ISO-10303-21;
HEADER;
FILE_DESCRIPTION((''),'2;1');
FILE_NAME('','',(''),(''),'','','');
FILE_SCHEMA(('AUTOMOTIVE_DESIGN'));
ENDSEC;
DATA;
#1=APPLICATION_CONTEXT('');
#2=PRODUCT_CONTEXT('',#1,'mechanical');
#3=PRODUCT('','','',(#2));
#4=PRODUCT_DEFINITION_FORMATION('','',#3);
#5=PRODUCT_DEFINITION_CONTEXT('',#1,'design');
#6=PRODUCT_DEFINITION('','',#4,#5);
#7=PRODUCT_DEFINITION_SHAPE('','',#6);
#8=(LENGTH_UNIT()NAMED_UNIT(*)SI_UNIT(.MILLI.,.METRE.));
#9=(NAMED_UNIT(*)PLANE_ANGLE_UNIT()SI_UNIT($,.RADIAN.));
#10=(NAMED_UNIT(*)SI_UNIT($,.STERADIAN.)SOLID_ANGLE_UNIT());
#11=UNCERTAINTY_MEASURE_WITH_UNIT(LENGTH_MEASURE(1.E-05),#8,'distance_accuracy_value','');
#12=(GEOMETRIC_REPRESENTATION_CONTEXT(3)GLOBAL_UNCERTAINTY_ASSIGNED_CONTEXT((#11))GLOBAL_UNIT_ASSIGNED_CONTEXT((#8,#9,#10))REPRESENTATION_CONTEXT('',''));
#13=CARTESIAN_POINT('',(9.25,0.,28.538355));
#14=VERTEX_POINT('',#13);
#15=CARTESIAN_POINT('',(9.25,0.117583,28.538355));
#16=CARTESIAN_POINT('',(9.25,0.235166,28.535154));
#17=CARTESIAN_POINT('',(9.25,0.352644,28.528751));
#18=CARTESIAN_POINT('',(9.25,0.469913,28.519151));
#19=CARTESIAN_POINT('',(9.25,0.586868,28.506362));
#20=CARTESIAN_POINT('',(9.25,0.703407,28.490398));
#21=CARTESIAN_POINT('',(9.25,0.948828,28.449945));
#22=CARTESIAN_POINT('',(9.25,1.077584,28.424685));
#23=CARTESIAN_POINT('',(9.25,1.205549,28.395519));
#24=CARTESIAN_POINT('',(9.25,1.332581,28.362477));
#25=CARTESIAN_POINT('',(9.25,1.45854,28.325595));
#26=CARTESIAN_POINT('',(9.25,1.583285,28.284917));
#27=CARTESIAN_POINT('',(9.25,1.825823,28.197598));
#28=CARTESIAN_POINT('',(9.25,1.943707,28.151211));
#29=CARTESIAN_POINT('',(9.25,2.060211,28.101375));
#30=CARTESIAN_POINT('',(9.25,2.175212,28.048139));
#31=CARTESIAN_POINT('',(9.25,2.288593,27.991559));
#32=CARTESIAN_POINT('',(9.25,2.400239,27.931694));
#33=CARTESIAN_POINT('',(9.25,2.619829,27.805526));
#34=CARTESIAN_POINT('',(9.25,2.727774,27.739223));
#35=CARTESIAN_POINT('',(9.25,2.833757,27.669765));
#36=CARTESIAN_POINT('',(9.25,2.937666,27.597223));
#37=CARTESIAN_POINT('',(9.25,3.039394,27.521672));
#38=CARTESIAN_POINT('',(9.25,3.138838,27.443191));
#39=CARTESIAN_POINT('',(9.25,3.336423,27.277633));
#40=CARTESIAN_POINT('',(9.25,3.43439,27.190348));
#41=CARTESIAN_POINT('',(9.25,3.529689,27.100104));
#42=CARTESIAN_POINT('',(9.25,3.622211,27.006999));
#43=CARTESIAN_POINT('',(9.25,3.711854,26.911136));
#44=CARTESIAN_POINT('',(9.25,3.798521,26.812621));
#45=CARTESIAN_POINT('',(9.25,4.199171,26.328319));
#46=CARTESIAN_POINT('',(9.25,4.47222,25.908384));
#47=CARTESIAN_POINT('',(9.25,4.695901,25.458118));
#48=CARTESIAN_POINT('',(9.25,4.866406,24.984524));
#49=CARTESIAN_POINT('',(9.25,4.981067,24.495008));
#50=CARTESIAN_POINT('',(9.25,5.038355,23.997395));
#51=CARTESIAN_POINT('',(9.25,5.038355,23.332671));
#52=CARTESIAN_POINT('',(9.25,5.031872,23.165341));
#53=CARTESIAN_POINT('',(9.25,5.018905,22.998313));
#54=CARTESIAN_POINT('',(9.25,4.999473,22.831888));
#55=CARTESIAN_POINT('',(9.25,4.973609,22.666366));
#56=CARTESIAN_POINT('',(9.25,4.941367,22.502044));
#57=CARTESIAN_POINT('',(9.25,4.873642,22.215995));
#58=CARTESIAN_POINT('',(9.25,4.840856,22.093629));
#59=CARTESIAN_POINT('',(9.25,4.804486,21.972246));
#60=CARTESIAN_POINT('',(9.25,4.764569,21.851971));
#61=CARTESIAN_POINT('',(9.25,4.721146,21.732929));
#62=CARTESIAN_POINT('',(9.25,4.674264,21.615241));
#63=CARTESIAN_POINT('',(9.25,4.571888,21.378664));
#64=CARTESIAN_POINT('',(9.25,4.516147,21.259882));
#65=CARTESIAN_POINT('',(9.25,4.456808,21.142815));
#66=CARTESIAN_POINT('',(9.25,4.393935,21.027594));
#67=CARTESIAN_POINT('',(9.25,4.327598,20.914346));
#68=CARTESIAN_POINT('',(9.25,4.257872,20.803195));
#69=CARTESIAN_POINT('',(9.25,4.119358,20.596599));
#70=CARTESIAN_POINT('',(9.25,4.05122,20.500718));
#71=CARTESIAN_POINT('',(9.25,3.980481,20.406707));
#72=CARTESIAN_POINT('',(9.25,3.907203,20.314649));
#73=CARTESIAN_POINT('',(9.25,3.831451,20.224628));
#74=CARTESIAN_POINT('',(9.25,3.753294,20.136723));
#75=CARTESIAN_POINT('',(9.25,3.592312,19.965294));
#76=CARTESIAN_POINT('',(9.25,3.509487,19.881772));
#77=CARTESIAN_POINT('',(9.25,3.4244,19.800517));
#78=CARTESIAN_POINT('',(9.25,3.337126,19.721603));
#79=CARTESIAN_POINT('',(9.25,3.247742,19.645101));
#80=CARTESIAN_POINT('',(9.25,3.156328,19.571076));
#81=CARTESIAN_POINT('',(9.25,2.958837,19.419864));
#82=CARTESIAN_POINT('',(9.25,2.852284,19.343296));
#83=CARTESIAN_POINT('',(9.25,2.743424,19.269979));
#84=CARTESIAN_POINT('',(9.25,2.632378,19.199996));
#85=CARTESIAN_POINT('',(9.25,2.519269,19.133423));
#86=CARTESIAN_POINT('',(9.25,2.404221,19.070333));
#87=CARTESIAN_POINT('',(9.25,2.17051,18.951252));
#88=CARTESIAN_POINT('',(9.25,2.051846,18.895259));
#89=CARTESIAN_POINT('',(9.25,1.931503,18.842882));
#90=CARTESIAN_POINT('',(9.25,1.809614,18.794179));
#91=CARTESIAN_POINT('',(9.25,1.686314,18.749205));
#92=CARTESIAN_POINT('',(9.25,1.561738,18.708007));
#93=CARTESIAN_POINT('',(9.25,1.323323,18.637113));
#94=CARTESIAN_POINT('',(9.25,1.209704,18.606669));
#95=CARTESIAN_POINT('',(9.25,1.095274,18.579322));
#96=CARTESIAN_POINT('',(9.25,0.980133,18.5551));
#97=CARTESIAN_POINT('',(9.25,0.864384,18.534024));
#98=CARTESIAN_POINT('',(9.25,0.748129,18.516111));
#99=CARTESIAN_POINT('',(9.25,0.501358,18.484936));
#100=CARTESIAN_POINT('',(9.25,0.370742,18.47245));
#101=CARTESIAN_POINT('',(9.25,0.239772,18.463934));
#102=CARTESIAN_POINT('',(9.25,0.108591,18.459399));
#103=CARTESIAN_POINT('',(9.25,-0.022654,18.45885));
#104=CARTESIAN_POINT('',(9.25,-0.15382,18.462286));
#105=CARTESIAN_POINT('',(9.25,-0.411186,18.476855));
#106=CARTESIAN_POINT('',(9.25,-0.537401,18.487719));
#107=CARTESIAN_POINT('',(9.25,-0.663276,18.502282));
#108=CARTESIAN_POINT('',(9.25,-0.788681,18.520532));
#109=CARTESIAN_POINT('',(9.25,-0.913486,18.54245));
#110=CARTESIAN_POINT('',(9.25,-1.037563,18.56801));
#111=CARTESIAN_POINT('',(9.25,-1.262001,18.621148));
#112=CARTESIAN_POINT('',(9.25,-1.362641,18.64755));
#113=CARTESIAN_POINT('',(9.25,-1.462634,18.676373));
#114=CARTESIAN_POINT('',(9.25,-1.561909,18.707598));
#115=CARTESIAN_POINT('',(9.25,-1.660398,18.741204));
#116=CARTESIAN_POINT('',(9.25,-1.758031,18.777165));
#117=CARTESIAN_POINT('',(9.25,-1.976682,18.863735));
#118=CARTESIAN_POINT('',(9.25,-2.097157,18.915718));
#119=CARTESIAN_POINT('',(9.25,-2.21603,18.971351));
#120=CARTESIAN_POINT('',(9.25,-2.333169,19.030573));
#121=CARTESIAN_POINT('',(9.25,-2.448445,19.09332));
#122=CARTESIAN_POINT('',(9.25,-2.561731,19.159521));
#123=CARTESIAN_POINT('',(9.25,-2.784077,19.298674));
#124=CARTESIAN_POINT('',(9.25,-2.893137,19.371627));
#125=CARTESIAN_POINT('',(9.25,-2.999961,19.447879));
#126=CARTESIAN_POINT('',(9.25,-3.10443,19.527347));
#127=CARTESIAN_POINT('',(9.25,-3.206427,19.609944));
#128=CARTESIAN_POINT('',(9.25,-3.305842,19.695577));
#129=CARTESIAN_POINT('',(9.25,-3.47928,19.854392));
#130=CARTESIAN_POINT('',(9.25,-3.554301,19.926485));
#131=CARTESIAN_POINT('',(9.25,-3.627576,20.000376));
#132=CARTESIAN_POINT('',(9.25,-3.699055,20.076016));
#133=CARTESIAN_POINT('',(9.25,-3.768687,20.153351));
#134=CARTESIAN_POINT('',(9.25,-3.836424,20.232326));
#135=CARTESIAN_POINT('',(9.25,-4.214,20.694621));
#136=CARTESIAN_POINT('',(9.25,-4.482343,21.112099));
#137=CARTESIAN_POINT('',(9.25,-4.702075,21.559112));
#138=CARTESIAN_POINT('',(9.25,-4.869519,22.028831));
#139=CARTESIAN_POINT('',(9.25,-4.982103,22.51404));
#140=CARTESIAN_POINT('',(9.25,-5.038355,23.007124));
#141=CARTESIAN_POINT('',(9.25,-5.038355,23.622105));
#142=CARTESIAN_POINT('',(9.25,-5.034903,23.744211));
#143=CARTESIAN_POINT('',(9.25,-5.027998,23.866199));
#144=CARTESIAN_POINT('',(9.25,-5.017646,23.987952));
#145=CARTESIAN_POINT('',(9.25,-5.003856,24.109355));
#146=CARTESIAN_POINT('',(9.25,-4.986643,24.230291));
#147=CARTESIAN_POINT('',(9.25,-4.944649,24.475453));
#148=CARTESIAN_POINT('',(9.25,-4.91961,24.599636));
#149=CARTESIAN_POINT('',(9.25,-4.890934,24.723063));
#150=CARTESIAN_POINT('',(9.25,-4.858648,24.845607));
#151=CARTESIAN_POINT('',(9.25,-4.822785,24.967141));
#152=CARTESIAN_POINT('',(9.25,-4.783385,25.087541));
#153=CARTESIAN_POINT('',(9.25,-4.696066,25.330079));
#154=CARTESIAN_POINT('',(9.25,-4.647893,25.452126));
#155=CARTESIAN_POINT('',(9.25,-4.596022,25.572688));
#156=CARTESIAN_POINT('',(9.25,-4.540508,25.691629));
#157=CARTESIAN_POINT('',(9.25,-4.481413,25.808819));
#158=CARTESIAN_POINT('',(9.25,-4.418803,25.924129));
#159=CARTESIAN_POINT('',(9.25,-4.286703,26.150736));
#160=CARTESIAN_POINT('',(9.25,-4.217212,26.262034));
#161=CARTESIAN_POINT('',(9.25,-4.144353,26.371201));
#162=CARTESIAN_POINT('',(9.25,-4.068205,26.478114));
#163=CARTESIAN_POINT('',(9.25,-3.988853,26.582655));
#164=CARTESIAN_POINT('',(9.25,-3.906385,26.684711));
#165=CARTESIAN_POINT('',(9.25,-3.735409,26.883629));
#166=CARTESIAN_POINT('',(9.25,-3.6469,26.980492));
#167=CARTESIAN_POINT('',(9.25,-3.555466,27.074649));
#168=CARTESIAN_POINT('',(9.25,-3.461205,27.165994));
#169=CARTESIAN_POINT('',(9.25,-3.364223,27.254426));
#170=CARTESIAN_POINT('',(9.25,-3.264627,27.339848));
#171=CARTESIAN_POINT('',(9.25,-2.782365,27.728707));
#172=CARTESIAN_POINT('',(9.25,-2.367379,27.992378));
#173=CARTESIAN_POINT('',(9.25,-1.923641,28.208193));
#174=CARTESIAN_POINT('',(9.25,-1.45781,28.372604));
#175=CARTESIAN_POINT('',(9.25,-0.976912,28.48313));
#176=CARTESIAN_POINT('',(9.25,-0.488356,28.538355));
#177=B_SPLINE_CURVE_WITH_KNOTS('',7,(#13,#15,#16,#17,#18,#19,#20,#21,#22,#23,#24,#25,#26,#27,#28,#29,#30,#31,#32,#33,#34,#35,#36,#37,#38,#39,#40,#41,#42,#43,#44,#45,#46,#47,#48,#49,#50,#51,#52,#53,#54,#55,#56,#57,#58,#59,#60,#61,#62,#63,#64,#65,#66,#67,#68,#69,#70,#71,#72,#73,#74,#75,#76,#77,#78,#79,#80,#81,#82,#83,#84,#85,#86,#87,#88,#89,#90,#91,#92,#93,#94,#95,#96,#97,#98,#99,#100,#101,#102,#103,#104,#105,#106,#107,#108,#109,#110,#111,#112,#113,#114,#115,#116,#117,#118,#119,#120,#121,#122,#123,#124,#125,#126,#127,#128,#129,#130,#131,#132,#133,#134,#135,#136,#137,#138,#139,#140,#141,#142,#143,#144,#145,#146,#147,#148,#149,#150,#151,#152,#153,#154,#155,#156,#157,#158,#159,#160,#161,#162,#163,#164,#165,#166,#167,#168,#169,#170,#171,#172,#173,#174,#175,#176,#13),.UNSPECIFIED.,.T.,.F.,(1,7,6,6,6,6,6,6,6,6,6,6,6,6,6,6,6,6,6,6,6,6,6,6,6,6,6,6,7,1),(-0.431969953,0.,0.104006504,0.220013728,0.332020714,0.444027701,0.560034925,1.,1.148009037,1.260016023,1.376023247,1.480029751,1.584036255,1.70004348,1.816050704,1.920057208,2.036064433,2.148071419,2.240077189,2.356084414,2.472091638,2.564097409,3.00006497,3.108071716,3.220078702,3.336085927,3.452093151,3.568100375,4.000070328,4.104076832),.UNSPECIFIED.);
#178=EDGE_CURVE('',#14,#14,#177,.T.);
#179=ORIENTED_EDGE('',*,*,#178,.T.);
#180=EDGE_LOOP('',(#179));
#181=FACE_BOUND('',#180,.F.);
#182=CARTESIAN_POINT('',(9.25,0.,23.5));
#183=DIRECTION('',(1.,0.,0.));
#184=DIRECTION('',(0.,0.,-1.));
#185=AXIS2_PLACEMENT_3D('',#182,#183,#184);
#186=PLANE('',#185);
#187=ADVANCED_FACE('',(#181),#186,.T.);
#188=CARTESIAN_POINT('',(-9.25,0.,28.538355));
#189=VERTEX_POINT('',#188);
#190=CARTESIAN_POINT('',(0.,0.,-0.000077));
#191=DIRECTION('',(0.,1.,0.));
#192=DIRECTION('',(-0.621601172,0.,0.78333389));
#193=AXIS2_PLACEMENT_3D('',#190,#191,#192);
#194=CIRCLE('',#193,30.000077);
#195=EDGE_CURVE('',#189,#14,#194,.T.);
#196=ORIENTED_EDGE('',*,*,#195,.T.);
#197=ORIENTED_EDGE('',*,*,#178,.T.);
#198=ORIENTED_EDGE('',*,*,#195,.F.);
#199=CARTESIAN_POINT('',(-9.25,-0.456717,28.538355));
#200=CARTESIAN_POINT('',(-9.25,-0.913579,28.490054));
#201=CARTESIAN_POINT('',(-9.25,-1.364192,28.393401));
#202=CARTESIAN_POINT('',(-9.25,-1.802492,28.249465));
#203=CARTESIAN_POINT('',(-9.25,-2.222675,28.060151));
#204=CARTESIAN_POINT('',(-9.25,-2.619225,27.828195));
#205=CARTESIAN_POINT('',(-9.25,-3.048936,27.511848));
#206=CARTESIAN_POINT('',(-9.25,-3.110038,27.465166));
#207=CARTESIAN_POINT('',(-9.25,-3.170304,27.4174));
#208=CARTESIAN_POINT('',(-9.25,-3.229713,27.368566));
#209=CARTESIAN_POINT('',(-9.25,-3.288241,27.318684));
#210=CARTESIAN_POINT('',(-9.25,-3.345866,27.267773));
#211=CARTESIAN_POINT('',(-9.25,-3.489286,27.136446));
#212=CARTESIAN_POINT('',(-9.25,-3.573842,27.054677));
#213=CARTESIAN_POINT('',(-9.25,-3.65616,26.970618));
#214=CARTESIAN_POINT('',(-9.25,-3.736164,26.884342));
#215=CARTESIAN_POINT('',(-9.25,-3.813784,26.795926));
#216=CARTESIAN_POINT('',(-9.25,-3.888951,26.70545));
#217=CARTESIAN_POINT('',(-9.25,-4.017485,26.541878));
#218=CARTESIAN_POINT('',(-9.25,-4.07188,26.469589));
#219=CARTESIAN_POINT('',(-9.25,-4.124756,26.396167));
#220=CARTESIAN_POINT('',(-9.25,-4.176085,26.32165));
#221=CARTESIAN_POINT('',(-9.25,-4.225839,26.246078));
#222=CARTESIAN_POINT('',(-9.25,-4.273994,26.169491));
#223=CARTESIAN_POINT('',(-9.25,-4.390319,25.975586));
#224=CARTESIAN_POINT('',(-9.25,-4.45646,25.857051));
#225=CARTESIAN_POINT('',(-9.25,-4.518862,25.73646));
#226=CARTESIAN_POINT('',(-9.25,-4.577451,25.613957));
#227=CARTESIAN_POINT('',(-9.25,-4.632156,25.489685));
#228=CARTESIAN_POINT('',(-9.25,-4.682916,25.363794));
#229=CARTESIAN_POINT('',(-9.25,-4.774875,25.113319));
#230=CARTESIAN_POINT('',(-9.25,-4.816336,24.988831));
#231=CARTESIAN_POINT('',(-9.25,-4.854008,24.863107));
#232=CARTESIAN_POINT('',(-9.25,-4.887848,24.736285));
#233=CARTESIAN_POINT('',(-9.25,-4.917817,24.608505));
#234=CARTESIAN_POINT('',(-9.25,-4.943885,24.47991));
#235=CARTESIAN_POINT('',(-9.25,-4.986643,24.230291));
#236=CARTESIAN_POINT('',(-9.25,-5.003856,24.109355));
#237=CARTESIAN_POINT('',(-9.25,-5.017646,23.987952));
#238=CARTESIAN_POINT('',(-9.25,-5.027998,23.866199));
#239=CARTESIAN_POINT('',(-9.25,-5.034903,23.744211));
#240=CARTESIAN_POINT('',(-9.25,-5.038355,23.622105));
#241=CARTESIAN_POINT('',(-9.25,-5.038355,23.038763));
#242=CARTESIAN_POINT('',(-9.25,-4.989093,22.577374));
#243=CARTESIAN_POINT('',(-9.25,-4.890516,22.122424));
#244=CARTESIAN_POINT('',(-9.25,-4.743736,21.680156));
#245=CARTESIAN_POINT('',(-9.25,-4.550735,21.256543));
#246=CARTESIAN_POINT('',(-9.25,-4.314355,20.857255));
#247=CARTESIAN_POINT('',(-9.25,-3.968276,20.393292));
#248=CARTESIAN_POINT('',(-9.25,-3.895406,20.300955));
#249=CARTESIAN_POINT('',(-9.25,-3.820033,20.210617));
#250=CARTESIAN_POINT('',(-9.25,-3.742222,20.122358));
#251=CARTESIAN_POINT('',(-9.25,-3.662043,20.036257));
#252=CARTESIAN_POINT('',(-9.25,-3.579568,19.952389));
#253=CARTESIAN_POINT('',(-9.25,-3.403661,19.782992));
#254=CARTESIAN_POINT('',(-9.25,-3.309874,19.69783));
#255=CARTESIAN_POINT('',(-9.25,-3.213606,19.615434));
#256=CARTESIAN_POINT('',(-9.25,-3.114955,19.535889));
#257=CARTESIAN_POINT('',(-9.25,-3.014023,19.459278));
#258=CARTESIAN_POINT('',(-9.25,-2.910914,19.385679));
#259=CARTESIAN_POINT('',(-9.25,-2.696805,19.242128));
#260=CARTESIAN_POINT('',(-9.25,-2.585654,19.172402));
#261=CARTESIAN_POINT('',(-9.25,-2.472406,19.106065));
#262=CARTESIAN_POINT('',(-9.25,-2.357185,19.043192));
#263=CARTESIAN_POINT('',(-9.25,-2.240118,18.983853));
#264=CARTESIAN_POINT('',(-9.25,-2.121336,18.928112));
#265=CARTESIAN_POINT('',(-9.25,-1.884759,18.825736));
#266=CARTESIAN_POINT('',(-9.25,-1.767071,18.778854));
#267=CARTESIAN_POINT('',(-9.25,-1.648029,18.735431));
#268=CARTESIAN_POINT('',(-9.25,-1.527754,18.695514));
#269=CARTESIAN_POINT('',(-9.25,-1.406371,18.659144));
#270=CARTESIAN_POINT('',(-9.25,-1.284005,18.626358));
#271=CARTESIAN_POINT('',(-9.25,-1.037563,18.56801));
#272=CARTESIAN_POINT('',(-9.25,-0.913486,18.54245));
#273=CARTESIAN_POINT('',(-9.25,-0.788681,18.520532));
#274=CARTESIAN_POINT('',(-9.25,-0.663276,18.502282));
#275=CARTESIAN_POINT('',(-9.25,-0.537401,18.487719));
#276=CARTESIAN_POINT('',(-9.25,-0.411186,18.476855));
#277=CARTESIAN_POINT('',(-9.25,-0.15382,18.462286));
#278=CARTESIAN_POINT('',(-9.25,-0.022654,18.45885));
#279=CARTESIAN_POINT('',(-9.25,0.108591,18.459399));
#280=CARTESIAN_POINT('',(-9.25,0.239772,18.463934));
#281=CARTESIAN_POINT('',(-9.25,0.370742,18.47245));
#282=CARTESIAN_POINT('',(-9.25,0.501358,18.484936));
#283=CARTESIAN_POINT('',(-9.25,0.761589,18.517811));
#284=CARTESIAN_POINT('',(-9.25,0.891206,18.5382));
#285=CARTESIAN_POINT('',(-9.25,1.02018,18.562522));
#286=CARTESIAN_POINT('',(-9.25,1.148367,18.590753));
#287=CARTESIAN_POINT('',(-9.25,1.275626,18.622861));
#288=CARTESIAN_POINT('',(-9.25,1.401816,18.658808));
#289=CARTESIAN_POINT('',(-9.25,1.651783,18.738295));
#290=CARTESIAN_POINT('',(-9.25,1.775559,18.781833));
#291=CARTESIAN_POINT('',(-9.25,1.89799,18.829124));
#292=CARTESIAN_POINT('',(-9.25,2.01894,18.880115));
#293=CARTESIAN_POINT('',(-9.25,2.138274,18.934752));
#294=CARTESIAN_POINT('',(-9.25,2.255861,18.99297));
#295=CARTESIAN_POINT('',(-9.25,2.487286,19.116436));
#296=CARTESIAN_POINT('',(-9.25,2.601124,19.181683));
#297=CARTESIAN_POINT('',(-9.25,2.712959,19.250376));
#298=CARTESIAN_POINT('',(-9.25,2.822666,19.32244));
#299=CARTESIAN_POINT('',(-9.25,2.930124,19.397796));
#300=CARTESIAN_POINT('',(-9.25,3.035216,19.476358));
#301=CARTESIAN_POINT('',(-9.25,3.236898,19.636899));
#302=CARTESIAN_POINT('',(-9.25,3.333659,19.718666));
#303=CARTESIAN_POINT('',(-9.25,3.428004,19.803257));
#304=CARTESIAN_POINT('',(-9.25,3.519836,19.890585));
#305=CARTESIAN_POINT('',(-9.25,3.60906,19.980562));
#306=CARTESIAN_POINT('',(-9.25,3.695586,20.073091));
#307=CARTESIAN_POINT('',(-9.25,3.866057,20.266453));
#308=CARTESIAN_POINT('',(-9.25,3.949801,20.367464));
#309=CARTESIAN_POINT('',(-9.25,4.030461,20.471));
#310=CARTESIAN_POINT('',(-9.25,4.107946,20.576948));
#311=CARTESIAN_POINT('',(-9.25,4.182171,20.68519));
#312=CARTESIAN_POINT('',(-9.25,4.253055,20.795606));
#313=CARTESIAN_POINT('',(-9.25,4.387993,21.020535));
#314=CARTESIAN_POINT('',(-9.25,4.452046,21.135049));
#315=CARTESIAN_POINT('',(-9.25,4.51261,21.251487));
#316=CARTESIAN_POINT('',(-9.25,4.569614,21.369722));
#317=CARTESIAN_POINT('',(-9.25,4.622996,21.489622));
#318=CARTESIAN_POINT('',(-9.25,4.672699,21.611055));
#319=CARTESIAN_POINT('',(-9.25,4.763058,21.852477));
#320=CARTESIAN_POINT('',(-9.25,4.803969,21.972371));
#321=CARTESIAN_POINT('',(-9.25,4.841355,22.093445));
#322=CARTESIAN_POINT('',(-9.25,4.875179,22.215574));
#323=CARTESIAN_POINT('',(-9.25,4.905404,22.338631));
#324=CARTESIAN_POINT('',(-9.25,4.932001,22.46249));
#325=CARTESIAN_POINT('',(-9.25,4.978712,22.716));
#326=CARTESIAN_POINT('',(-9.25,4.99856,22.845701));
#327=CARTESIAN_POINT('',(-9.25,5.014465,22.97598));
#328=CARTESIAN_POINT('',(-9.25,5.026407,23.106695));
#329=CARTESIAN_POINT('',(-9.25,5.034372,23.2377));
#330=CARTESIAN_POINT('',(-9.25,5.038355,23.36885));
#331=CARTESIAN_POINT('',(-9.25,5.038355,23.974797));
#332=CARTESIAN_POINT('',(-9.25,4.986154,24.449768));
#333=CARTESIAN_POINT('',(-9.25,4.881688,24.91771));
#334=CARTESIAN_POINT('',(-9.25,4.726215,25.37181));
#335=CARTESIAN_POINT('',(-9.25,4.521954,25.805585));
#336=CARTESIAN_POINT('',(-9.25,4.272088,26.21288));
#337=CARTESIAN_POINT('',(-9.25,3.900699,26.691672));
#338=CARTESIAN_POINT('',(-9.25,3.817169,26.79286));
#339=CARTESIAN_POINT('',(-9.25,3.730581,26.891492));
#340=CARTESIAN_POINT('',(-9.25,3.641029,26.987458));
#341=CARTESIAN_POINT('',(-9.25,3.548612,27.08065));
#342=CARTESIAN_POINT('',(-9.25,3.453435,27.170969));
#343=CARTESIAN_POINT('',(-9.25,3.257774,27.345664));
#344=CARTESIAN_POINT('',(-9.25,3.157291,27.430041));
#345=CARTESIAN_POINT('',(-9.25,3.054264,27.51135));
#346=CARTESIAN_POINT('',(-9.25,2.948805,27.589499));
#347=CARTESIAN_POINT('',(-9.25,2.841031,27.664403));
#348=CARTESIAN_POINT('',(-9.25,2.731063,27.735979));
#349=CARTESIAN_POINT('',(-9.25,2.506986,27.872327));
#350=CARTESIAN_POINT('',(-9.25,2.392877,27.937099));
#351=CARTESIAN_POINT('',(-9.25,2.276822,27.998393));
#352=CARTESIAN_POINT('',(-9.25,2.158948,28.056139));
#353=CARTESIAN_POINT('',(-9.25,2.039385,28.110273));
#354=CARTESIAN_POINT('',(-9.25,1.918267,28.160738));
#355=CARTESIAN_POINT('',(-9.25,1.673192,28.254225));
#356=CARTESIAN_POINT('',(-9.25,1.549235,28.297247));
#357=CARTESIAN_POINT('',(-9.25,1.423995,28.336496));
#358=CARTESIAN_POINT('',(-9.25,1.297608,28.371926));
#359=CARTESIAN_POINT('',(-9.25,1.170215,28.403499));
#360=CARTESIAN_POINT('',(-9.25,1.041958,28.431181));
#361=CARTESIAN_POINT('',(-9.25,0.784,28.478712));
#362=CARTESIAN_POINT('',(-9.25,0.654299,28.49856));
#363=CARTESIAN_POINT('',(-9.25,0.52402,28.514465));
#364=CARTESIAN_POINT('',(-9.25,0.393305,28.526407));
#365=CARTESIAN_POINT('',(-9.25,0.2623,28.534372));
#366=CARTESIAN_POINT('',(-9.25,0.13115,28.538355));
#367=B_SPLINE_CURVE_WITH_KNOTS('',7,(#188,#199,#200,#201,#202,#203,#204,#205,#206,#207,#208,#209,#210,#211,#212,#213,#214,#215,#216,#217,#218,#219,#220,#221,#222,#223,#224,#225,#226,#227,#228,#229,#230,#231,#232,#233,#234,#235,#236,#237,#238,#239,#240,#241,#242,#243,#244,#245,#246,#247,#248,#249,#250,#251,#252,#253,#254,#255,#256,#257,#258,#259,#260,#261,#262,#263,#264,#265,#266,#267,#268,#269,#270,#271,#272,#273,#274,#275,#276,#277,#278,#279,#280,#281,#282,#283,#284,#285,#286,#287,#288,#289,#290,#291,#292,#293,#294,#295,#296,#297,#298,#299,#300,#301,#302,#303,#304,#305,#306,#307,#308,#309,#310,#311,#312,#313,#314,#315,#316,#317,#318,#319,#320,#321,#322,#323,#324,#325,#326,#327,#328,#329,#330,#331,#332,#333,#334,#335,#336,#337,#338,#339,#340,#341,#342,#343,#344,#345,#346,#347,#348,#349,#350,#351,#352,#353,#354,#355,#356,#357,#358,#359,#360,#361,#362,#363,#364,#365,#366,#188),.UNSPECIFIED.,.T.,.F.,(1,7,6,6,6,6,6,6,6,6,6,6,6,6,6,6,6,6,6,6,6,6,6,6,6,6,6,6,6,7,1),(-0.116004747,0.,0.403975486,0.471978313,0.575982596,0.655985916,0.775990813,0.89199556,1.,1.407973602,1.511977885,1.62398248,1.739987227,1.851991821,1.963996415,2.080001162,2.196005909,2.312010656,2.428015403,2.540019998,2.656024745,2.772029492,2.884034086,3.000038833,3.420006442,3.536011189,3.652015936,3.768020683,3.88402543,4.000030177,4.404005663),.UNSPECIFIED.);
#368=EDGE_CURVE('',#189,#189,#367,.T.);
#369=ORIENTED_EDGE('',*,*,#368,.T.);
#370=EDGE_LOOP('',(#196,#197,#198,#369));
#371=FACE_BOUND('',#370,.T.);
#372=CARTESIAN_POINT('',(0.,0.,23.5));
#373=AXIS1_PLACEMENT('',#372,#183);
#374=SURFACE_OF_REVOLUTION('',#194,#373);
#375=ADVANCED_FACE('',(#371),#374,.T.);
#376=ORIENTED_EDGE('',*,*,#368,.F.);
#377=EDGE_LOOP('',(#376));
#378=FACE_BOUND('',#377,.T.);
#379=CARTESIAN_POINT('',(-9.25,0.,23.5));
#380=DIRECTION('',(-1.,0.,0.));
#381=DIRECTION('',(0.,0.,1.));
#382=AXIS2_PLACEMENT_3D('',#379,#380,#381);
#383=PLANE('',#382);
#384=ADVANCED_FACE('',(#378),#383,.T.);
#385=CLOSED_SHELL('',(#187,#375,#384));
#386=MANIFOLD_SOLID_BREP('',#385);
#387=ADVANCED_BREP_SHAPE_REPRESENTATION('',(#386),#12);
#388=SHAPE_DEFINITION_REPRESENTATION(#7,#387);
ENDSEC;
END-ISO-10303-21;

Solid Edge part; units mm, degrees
sketch "Sketch1" plane through (0, 0, 0) normal (0, -1, 0) x (1, 0, 0)
  arc A0 (-18.6481, 23.5) -> (18.6481, 23.5) centre (0, 0) cw
  line L0 (0, 23.5) -> (18.6481, 23.5)
  line L1 (0, 23.5) -> (-18.6481, 23.5)
revolve "RevolvedProtrusion1" add sketch "Sketch1" angle 360 about axis through (0, 0, 23.5) along (1, 0, 0)
sketch "Sketch2" plane through (0, 0, 0) normal (0, -1, 0) x (1, 0, 0)
  line L0 (-9.25, 28.5384) -> (-18.6481, 28.5384)
  line L1 (-18.6481, 28.5384) -> (-18.6481, 23.5)
  line L2 (-18.6481, 23.5) -> (-9.25, 23.5)
  line L3 (-9.25, 23.5) -> (-9.25, 28.5384)
extrude "Cutout1" cut sketch "Sketch2" along normal mid plane 171.1922
mirror "Mirror1" about plane through (-13.949, 0, 23.5) normal (0, 0, 1) of "Cutout1"
mirror "Mirror2" about plane through (0, 0, 0) normal (-1, 0, 0) of "Cutout1", "Mirror1"
properties material "Wheel2"
